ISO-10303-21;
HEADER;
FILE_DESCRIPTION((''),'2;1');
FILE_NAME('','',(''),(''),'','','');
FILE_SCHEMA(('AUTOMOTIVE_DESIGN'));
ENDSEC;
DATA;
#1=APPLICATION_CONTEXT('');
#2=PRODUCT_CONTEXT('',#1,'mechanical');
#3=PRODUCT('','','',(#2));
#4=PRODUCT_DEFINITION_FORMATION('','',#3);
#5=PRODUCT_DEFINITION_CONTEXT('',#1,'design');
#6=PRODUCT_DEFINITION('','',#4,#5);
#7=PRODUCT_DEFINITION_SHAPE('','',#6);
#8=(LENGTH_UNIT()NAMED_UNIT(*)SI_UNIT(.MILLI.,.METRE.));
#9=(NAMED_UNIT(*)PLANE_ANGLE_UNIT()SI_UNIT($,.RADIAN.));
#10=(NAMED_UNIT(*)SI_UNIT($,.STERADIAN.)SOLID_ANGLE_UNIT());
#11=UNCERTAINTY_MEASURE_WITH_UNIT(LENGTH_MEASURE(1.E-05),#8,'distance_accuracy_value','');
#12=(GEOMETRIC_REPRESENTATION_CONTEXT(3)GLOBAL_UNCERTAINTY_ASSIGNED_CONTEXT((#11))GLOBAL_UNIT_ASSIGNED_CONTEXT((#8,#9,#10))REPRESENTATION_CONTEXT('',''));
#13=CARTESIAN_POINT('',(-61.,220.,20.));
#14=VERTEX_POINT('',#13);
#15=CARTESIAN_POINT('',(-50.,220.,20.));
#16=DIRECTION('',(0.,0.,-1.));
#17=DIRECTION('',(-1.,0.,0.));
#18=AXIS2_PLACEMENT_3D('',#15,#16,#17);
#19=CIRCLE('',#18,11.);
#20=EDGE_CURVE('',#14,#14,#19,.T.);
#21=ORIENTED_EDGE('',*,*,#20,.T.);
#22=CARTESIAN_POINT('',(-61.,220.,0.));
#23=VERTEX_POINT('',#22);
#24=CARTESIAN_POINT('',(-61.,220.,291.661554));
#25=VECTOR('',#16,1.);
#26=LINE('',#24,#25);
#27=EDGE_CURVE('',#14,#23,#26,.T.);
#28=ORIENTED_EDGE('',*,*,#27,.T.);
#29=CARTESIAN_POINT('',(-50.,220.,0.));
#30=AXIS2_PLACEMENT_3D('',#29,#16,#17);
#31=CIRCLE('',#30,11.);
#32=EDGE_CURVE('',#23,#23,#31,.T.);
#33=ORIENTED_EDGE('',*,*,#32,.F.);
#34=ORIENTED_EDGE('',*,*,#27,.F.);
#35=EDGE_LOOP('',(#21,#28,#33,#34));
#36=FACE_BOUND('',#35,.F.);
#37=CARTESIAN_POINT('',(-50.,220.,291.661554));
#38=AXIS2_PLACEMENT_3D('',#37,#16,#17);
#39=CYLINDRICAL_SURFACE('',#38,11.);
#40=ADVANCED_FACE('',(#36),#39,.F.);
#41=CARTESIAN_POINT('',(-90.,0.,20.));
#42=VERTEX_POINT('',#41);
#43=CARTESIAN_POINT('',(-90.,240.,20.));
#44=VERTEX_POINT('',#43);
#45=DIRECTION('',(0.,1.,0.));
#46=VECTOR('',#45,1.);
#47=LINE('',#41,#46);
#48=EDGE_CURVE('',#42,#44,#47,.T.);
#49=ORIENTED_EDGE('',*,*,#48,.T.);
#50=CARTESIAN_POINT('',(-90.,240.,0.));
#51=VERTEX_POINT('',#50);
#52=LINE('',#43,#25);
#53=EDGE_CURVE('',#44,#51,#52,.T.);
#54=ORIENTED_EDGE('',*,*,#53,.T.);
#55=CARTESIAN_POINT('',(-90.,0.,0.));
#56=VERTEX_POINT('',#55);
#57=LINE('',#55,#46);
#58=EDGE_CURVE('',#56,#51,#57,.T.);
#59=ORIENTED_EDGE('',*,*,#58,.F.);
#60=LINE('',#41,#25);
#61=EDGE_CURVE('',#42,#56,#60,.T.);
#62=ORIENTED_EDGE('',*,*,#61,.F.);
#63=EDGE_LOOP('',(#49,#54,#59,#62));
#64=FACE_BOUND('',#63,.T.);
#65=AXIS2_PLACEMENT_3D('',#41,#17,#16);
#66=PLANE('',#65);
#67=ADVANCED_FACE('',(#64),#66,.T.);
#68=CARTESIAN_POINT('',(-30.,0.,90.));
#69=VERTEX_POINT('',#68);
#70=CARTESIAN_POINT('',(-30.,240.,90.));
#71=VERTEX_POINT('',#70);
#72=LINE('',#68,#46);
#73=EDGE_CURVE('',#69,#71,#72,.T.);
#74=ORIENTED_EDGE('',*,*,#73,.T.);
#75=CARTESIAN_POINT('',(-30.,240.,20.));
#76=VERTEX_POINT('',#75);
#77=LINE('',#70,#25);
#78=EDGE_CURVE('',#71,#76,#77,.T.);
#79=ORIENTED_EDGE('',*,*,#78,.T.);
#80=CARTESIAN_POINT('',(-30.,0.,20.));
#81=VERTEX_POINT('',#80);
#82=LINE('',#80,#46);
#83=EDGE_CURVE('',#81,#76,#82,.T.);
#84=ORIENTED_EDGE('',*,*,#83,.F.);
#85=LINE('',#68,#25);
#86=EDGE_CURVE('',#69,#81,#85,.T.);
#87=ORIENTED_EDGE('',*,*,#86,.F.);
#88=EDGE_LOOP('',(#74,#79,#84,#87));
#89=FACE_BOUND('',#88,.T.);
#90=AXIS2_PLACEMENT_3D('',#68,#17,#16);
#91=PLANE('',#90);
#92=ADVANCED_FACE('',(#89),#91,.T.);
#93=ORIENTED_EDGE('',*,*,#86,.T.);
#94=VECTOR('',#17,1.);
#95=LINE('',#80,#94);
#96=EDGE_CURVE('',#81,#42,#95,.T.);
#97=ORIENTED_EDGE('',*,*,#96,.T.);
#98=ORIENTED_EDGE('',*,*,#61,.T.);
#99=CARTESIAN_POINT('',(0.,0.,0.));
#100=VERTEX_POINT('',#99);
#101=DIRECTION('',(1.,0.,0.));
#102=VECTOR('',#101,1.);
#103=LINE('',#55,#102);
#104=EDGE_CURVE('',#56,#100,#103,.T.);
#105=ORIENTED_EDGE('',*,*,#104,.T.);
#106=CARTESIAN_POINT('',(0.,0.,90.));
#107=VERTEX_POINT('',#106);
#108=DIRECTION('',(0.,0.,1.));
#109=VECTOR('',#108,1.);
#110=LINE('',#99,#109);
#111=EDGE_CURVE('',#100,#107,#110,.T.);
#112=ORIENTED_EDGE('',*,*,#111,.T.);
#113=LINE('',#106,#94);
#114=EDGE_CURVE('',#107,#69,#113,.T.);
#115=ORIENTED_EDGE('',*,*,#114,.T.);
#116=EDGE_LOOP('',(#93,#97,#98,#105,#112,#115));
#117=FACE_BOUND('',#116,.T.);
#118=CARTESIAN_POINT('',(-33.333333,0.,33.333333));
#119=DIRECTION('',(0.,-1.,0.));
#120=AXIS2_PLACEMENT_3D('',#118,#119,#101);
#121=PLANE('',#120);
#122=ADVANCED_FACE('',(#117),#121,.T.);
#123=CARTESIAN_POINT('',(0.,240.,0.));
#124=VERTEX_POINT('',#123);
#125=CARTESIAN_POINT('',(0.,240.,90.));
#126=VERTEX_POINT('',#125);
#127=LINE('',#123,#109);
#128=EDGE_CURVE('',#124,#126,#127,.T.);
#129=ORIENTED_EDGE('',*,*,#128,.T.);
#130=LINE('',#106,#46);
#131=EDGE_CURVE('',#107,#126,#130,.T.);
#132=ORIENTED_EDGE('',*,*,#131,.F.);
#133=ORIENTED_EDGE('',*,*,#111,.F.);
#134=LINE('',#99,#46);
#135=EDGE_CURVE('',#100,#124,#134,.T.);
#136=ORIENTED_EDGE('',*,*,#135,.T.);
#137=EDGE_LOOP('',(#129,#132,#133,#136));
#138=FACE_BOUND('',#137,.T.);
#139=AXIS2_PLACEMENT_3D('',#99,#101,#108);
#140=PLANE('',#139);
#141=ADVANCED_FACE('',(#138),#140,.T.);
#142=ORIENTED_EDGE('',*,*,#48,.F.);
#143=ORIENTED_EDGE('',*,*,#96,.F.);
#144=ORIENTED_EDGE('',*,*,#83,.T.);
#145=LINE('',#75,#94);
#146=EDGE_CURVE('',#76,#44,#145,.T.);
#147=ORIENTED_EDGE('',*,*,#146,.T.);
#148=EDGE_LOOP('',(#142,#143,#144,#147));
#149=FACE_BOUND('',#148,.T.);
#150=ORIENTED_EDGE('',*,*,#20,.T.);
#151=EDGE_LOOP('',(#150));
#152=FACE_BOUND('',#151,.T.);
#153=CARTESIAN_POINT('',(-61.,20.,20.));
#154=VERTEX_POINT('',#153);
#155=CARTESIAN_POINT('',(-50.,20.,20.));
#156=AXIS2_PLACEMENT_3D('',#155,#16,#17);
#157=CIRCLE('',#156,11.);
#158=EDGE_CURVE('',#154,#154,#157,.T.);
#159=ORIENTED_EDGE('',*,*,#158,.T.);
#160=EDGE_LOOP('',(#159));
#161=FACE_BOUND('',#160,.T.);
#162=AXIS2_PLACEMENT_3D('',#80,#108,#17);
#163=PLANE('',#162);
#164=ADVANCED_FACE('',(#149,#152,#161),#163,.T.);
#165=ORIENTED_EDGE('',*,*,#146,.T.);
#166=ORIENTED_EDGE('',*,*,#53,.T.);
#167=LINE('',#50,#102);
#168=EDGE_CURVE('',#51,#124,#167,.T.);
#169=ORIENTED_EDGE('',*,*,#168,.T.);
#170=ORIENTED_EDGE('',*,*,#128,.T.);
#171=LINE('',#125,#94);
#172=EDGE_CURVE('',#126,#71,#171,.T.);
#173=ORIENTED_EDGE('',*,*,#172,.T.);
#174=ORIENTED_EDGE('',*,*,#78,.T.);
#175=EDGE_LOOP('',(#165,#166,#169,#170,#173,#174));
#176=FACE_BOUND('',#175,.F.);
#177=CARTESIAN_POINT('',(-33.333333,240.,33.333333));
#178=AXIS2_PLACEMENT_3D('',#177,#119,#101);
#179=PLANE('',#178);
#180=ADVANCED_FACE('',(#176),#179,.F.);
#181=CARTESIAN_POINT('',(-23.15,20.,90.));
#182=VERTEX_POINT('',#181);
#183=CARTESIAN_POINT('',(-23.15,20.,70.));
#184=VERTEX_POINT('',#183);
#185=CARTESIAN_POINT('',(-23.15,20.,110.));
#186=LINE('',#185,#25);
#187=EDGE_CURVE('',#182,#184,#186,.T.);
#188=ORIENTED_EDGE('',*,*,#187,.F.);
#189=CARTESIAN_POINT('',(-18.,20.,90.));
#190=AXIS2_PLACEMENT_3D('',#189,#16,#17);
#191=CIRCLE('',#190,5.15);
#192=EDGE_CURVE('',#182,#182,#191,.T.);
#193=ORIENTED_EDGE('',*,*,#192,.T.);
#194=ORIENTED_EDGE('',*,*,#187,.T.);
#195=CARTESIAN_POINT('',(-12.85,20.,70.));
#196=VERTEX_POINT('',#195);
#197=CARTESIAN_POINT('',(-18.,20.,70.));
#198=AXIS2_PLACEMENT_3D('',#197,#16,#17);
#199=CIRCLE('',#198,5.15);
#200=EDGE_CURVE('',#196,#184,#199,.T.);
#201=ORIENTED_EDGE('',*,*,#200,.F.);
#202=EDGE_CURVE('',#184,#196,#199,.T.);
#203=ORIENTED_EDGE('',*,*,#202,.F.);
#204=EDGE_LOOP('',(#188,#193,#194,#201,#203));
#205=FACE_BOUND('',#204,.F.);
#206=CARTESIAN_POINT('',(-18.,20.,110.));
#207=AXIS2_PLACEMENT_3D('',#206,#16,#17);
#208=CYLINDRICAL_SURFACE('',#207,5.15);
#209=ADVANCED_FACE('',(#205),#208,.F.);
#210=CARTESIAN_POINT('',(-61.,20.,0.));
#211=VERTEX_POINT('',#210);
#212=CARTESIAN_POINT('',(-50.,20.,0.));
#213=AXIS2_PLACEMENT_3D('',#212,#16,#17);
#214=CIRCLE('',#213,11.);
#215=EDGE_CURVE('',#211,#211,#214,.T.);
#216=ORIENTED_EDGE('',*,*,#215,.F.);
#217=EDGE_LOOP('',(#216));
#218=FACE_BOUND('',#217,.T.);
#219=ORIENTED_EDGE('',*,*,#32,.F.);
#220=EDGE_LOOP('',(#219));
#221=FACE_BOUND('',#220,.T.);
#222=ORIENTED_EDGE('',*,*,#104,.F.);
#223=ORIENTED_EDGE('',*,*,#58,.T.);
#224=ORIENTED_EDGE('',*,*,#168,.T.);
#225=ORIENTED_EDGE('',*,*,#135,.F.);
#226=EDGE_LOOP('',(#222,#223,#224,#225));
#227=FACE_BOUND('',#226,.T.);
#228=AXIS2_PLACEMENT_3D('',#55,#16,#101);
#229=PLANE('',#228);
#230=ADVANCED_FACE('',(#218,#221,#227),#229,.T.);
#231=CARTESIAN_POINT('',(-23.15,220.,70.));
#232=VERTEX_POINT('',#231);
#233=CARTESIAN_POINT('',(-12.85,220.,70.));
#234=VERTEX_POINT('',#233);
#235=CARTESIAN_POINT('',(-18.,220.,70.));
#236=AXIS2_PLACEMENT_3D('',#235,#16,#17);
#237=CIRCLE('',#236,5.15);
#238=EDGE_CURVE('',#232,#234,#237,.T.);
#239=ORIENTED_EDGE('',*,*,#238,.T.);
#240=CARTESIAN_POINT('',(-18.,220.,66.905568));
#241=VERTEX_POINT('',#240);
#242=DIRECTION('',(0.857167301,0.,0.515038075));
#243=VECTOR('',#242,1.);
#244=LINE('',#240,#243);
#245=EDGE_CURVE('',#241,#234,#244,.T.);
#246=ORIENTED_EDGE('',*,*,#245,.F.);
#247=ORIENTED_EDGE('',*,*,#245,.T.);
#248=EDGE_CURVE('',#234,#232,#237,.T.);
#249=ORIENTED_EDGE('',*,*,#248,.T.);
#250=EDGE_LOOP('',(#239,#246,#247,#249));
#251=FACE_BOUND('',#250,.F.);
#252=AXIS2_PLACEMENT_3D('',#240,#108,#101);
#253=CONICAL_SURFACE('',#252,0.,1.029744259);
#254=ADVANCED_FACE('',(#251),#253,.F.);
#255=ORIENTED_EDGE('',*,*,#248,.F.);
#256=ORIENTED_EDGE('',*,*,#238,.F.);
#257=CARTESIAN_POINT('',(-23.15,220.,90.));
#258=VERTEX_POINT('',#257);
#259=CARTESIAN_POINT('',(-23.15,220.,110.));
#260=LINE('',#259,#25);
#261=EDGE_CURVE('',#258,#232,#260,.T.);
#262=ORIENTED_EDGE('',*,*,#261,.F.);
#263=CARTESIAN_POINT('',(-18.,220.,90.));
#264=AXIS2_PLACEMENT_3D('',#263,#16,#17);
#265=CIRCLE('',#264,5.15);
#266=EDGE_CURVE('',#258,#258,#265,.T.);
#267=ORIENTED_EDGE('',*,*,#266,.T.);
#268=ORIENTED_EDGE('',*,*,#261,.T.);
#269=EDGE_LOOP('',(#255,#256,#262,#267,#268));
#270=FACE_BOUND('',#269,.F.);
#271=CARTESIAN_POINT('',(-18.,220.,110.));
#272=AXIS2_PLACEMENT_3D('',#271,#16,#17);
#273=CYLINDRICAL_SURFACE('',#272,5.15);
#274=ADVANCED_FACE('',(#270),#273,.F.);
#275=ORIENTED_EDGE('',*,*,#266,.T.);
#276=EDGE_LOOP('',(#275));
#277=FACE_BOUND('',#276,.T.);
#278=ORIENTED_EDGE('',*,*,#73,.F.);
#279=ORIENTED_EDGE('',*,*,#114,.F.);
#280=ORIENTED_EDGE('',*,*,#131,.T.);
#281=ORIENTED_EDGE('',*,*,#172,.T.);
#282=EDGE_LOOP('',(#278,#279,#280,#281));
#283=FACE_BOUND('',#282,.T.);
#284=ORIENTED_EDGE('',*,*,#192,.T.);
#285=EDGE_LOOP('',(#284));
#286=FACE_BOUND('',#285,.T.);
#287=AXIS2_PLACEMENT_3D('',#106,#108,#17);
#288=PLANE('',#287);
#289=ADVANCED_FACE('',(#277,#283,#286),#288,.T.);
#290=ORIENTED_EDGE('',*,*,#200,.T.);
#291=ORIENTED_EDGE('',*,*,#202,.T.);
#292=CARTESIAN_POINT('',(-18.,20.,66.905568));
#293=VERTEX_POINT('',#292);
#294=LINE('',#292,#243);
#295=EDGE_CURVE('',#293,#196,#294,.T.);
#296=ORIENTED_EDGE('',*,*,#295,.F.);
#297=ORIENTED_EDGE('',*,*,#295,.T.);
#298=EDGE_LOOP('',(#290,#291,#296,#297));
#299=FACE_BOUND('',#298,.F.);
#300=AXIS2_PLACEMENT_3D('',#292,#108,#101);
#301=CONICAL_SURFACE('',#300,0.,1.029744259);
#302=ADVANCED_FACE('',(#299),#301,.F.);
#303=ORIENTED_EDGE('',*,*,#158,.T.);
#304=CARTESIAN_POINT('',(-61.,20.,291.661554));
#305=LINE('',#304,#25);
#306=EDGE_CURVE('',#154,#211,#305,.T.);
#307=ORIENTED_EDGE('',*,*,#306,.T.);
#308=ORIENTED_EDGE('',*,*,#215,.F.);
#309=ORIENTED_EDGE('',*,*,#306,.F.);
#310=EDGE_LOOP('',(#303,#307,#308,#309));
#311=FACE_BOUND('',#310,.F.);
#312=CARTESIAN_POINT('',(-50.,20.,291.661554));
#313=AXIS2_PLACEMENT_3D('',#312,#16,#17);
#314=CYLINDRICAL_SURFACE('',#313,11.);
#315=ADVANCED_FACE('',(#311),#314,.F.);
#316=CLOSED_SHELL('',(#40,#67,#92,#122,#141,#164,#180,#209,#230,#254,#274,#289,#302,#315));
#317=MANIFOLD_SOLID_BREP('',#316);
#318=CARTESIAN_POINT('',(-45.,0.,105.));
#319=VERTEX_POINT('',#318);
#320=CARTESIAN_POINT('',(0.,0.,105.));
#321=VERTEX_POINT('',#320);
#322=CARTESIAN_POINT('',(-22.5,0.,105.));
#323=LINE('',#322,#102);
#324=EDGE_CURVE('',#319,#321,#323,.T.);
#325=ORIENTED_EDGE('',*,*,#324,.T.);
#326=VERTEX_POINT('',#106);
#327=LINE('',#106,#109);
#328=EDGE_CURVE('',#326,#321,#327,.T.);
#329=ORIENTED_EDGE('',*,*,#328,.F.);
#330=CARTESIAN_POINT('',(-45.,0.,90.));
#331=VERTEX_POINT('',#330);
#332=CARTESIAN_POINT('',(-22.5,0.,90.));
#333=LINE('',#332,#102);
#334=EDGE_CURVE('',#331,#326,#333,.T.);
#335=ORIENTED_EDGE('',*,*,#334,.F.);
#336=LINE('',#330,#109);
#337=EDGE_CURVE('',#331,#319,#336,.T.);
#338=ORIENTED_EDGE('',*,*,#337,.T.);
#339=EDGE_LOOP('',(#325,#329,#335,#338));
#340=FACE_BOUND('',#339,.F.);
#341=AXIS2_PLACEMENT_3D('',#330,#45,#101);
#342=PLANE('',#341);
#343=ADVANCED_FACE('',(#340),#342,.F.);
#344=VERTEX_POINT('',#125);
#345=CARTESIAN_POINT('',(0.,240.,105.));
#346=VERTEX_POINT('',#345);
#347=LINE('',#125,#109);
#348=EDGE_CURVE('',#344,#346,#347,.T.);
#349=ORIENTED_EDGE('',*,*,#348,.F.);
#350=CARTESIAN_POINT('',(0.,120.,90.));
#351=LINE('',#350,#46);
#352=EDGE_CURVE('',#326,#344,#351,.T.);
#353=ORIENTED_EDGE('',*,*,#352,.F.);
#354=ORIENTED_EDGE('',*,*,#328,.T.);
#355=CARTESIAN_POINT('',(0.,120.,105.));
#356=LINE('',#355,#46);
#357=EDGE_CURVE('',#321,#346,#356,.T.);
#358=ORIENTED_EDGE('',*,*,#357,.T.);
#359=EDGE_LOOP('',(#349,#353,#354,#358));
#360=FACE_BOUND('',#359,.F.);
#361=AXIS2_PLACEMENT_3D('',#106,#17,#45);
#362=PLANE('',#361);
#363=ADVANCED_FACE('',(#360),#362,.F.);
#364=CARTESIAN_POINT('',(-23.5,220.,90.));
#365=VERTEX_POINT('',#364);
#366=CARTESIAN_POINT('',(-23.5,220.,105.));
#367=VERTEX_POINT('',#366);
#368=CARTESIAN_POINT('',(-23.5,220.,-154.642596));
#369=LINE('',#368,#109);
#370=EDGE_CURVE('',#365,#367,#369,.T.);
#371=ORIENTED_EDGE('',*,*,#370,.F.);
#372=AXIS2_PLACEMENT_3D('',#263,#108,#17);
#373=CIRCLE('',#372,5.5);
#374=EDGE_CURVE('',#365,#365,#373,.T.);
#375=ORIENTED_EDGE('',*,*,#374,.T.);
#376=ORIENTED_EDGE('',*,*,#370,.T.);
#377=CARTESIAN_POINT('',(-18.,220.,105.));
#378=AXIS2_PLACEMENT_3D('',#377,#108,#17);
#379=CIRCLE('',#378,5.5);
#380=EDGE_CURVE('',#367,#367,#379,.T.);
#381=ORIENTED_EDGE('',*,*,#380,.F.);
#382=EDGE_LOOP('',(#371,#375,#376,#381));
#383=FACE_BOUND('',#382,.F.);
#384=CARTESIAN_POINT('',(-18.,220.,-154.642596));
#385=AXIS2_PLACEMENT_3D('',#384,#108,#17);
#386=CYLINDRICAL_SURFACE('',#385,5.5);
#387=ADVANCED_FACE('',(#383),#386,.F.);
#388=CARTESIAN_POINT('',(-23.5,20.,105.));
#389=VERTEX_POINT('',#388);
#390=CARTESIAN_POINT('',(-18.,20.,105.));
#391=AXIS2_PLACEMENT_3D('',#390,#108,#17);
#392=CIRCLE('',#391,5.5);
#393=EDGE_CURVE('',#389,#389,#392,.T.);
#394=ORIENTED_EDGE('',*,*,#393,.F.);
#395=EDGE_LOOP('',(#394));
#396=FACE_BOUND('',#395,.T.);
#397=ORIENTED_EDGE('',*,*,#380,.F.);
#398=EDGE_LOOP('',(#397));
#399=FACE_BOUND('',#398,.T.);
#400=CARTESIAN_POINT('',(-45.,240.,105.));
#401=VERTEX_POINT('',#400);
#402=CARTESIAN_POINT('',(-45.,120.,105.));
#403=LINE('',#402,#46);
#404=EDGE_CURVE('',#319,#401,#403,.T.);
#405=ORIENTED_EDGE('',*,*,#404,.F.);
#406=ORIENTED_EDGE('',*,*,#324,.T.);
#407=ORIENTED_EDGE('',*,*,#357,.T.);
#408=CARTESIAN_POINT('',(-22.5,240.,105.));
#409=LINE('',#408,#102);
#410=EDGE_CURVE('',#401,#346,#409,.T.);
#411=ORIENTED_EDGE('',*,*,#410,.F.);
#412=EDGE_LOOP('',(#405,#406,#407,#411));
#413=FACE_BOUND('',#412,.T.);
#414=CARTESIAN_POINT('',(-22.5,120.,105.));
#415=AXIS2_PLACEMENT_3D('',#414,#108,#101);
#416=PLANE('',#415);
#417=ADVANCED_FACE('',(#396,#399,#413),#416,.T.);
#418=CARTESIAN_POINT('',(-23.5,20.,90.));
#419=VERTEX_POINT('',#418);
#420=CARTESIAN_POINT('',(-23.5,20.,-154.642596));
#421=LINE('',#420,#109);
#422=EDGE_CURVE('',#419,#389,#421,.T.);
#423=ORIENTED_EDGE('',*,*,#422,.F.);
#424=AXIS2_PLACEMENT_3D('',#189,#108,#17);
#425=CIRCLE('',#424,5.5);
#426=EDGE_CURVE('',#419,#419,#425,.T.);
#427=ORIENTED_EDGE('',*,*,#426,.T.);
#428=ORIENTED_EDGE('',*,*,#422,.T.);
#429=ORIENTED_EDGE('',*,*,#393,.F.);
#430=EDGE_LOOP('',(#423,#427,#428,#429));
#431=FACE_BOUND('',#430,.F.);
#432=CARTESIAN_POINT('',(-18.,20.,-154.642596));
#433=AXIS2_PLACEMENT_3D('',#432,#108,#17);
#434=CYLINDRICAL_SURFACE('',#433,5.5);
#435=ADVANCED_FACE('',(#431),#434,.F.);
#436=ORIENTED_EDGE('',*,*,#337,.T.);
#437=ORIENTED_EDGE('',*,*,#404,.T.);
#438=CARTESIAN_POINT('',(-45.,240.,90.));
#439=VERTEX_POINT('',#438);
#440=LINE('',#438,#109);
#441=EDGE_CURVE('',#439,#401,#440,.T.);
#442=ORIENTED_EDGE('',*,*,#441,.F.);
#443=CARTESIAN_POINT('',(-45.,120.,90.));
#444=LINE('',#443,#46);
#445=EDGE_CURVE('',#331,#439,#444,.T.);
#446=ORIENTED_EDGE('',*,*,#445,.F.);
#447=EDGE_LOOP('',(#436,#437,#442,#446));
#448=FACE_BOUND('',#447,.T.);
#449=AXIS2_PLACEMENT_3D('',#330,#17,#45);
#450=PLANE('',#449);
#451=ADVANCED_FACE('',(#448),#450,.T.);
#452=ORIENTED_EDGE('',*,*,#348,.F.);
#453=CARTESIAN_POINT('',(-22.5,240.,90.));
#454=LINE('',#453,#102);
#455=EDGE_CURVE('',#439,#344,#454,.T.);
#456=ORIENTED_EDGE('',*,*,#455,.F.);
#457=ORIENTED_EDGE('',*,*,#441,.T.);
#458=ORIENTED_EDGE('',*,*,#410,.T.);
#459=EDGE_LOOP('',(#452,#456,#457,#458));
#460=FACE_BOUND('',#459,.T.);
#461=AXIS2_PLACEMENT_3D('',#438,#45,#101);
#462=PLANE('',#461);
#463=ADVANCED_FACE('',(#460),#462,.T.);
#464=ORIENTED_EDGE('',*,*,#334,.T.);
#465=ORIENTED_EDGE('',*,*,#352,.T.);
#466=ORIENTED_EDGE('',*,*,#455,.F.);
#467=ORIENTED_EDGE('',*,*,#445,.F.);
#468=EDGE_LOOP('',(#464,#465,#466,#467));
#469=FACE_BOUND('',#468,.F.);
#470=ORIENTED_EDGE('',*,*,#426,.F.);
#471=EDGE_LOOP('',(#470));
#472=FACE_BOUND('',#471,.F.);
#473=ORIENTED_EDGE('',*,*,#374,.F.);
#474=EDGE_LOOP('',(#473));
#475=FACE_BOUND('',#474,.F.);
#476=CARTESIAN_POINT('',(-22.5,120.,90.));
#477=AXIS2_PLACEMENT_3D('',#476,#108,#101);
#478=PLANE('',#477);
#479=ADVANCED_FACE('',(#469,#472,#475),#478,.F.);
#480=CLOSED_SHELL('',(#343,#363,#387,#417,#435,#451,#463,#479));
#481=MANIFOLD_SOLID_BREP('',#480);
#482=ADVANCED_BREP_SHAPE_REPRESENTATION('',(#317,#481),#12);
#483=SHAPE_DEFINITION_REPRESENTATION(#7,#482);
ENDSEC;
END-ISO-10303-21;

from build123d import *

# Parameters (mm, degrees)
F1_DEPTH = 240
F3_D     = 22
F5_D     = 10.3
F5_DEPTH = 20
F5_TIP   = 3.094432188
F6_W     = 45
F6_H     = 240
F7_DEPTH = 15
F8_D     = 11


# Not quite as in the source:
# - a feature names something its author has since deleted; it is built from what else it names


with BuildPart() as f1:
    # F0 (on Front) → F1 (new body)
    with BuildSketch(Plane.XZ):
        Polygon((-30, 20), (-90, 20), (-90, 0), (0, 0), (0, 90), (-30, 90), align=None)
    extrude(amount=-F1_DEPTH)

    # F3 (through all)
    with Locations(Plane.XY.offset(20)):
        with Locations((-50, 220), (-50, 20), (-50, 220), (-50, 20)):
            Hole(F3_D / 2)

    # F5
    with Locations(Plane.XY.offset(90)):
        with Locations((-18, 220), (-18, 20)):
            Hole(F5_D / 2, depth=F5_DEPTH)
            with Locations((0, 0, -(F5_DEPTH + F5_TIP / 2))):  # 118° drill point
                Cone(0, F5_D / 2, F5_TIP, mode=Mode.SUBTRACT)


with BuildPart() as f7:
    # F6 (on face) → F7 (new body)
    with BuildSketch(Plane.XY.offset(90)):
        with Locations((-22.5, 120)):
            Rectangle(F6_W, F6_H)
    extrude(amount=F7_DEPTH)

    # F8 (through all)
    with Locations(Plane(origin=(0, 0, 90), x_dir=(1, 0, 0), z_dir=(0, 0, -1))):
        with Locations((-18, -220), (-18, -20)):
            Hole(F8_D / 2)


solid = Compound([f1.part, f7.part])
